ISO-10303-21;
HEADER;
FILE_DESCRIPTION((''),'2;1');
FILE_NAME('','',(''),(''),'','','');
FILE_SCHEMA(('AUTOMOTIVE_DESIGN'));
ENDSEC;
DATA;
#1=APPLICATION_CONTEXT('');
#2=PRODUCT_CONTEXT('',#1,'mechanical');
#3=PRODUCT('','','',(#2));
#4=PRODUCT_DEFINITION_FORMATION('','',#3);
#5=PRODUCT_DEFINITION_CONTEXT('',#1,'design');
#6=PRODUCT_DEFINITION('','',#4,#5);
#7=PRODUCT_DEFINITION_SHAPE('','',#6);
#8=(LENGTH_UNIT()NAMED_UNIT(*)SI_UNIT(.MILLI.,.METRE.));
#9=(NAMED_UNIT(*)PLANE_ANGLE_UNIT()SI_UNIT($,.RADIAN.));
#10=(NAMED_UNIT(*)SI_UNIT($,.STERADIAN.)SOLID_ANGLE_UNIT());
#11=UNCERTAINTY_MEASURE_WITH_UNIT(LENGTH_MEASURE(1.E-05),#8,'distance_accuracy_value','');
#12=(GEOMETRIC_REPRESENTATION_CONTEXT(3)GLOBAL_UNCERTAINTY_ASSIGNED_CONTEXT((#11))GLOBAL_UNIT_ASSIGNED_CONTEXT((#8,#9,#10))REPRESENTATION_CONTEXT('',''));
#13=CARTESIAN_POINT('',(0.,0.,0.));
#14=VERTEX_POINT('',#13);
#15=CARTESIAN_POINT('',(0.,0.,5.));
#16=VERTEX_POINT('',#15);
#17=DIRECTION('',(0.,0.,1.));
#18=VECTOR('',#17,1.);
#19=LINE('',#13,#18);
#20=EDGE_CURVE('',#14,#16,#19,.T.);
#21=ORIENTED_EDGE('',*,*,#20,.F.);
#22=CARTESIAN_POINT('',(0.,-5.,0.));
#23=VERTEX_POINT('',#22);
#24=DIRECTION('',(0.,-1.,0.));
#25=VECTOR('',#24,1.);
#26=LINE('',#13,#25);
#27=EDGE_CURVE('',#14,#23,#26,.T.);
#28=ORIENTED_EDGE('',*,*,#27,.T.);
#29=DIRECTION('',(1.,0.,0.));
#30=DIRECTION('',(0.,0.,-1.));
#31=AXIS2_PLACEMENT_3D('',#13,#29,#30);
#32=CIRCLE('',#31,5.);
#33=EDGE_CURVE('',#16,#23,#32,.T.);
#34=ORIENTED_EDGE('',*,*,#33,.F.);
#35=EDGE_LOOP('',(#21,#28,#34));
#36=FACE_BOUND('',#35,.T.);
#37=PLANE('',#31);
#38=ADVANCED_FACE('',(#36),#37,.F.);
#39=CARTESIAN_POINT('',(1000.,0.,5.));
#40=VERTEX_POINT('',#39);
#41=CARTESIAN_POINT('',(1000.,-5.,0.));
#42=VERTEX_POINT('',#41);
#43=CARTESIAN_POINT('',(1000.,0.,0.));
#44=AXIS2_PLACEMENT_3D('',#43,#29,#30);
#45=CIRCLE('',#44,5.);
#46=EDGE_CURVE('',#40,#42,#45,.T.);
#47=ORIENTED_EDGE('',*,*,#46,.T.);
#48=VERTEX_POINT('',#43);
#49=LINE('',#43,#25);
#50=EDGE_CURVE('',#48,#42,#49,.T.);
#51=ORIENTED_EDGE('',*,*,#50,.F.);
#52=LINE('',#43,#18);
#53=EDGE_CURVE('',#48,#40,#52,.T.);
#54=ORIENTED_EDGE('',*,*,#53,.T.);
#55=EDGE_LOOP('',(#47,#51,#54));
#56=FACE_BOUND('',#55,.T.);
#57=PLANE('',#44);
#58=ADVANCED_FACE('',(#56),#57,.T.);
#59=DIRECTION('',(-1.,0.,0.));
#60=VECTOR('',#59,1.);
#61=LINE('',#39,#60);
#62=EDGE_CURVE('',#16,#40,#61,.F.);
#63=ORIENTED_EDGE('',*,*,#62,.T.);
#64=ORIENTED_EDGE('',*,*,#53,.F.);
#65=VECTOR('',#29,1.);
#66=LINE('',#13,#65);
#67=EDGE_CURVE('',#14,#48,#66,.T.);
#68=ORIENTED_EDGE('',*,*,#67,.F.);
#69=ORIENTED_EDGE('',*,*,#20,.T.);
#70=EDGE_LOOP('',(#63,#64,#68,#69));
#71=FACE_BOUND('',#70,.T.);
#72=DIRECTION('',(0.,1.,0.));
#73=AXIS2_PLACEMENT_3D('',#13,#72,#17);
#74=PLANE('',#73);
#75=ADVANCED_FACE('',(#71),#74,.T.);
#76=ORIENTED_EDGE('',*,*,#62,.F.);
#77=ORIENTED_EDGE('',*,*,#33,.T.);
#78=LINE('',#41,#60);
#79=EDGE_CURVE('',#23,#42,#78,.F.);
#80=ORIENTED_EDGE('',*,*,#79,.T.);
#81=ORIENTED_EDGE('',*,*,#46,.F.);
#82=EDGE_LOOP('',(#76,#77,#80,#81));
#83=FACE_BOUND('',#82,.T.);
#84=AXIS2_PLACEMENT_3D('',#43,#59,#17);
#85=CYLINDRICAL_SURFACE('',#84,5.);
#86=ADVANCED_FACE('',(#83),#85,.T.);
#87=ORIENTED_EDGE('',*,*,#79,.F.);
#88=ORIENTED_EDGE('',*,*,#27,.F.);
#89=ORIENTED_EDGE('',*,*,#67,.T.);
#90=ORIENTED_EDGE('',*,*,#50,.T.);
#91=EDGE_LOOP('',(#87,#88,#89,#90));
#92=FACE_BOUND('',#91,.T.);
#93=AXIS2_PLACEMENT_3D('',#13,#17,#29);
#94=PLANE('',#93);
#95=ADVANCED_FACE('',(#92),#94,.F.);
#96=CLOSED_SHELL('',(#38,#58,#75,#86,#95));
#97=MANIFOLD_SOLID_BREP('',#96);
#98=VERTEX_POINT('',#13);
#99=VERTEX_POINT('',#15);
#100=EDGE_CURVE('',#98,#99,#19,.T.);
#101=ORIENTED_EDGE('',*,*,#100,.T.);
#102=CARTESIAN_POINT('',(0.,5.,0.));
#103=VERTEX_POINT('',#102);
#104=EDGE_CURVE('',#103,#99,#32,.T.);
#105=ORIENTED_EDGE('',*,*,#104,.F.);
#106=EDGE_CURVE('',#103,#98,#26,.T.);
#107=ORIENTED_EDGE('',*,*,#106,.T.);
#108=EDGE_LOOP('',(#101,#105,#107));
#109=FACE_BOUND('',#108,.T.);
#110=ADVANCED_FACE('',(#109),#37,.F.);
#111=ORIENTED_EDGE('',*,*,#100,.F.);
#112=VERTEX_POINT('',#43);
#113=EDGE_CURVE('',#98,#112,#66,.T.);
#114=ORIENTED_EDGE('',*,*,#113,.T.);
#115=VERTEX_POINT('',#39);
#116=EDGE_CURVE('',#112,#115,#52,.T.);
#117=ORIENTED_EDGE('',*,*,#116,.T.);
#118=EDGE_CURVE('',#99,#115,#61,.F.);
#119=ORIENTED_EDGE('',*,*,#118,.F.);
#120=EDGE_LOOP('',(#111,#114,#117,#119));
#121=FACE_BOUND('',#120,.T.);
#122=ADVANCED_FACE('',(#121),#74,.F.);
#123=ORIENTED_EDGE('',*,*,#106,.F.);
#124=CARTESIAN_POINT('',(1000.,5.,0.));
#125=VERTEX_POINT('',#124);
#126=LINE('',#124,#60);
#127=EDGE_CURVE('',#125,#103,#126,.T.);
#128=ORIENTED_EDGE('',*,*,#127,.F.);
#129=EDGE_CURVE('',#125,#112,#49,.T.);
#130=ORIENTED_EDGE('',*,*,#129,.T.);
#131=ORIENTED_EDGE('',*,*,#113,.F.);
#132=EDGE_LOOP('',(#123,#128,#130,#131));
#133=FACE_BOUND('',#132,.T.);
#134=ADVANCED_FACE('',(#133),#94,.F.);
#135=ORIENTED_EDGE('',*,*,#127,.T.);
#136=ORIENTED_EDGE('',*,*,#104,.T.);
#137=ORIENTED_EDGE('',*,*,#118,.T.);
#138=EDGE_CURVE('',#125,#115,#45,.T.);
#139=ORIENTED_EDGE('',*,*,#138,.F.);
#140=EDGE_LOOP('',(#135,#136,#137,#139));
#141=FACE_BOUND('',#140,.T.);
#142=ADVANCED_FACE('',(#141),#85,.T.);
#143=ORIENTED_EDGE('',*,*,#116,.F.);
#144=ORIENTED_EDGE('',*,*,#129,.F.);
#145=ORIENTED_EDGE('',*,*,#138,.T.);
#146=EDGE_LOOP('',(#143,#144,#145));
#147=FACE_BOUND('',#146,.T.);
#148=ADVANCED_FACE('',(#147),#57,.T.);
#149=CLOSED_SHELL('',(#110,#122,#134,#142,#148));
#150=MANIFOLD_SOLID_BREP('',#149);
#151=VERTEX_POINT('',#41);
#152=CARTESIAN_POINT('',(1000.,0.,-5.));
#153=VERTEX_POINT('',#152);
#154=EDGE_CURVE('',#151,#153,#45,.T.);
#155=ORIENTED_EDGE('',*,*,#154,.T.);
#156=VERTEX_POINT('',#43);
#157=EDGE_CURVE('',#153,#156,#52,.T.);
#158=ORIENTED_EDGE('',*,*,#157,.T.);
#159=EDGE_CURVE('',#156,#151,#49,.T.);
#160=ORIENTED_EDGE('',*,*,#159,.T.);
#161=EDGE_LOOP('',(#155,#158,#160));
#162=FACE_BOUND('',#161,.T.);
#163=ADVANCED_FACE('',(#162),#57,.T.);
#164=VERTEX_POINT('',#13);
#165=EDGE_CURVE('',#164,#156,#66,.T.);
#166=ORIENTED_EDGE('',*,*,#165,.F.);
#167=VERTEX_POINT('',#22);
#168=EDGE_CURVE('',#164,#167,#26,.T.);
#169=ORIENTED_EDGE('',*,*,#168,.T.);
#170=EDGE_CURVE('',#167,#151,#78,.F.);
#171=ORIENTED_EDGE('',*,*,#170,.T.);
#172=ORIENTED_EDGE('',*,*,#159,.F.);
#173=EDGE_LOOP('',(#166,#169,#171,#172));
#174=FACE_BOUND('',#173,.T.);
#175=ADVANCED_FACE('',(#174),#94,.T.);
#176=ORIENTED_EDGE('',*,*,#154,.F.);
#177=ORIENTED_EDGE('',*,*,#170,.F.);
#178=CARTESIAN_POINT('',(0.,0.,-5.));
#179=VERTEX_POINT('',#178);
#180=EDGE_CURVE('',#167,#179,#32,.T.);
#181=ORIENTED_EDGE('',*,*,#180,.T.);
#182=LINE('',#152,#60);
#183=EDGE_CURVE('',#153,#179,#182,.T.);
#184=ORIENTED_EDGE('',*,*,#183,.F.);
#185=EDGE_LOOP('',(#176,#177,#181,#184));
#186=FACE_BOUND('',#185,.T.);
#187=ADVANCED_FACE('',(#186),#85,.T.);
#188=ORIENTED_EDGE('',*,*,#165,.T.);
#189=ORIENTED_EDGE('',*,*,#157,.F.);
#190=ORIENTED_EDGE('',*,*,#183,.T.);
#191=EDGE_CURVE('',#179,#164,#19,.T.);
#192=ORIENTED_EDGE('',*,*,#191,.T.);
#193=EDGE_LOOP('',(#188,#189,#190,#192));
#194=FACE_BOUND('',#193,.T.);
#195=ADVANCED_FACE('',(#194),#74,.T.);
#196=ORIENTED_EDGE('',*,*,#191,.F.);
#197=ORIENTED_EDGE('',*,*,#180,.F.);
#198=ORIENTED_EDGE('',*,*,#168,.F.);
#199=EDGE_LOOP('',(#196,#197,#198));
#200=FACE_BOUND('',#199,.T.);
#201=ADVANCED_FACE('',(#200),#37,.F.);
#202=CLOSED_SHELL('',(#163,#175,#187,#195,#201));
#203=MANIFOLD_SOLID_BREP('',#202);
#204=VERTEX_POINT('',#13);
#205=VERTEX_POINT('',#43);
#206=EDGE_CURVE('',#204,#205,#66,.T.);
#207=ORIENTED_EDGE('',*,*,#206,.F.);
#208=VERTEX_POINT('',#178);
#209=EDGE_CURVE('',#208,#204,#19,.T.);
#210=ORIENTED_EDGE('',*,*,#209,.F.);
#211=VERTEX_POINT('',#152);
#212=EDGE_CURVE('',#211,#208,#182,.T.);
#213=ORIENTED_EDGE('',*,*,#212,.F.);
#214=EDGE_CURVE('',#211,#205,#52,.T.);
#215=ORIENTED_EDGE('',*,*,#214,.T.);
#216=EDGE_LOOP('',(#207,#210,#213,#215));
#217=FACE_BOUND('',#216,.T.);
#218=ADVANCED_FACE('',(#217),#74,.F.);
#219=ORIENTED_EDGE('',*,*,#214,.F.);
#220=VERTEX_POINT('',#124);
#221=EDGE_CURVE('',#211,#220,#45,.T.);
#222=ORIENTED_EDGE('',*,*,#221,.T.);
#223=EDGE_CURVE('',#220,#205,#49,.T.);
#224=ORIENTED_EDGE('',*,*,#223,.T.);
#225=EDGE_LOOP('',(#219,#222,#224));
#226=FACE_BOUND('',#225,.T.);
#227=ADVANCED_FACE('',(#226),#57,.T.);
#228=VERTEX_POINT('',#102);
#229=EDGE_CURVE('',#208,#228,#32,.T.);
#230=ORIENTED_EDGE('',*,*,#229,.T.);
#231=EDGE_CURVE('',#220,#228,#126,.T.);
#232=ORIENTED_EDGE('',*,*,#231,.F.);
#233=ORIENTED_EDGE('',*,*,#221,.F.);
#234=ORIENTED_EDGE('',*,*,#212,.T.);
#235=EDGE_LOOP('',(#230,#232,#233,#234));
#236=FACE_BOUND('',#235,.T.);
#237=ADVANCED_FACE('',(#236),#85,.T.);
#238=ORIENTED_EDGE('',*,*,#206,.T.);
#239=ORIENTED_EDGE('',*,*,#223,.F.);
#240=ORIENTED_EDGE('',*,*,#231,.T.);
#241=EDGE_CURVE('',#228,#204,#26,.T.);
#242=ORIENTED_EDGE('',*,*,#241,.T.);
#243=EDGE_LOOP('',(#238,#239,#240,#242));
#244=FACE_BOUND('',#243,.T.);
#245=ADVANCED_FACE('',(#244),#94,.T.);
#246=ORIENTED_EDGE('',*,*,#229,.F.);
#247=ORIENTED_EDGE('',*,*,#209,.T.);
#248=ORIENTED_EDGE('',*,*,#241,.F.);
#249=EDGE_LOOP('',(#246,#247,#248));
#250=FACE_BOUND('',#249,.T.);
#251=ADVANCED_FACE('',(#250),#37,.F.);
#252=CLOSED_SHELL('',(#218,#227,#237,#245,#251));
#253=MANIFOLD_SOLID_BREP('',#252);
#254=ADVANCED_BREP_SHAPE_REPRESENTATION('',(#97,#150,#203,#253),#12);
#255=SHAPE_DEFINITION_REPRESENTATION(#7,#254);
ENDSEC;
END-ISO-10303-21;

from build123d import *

# Parameters (mm, degrees)
SKETCH_1_R                 = 5
EXTRUDE_1_DEPTH            = 1000
SPLIT_START                = -5.0000001
SPLIT_BODIES_1_OUTLINE_W   = 1000
SPLIT_BODIES_1_OUTLINE_H   = 6
SPLIT_BODIES_1_DEPTH       = 10.0000001
SPLIT_BODIES_1_2_OUTLINE_W = 1000
SPLIT_BODIES_1_2_OUTLINE_H = 6
SPLIT_BODIES_1_2_DEPTH     = 5
SPLIT_BODIES_1_3_DEPTH     = 1000
SPLIT_BODIES_1_4_DEPTH     = 1000
SPLIT_BODIES_1_5_DEPTH     = 1000


# Read off the part's stored shape, not the designer's step: Разделить1
with BuildPart() as part:
    # Эскиз1 → Бобышка-Вытянуть1 (new body)
    with BuildSketch(Plane(origin=(0, 0, 0), x_dir=(0, 0, -1), z_dir=(1, 0, 0))):
        Circle(SKETCH_1_R)
    extrude(amount=EXTRUDE_1_DEPTH)

    # Split Bodies 1 outline → Split Bodies 1 (cut)
    with BuildSketch(Plane(origin=(0, 0, 0), x_dir=(1, 0, 0), z_dir=(0, 1, 0)).offset(SPLIT_START)):
        with Locations((500, -3)):
            Rectangle(SPLIT_BODIES_1_OUTLINE_W, SPLIT_BODIES_1_OUTLINE_H)
    extrude(amount=SPLIT_BODIES_1_DEPTH, mode=Mode.SUBTRACT)

    # Split Bodies 1 2 outline → Split Bodies 1 2 (cut)
    with BuildSketch(Plane(origin=(0, 0, 0), x_dir=(1, 0, 0), z_dir=(0, 1, 0))):
        with Locations((500, 3)):
            Rectangle(SPLIT_BODIES_1_2_OUTLINE_W, SPLIT_BODIES_1_2_OUTLINE_H)
    extrude(amount=SPLIT_BODIES_1_2_DEPTH, mode=Mode.SUBTRACT)


with BuildPart() as body_2:
    # Split Bodies 1 3 outline → Split Bodies 1 3 (new body)
    with BuildSketch(Plane.YZ):
        with BuildLine():
            Line((0, 5), (0, 0))
            Line((0, 0), (5, 0))
            ThreePointArc((5, 0), (3.535533906, 3.535533906), (0, 5))
        make_face()
    extrude(amount=SPLIT_BODIES_1_3_DEPTH)


with BuildPart() as body_3:
    # Split Bodies 1 4 outline → Split Bodies 1 4 (new body)
    with BuildSketch(Plane.YZ):
        with BuildLine():
            Line((-5, 0), (0, 0))
            Line((0, 0), (0, 5))
            ThreePointArc((0, 5), (-3.535533906, 3.535533906), (-5, 0))
        make_face()
    extrude(amount=SPLIT_BODIES_1_4_DEPTH)


with BuildPart() as body_4:
    # Split Bodies 1 5 outline → Split Bodies 1 5 (new body)
    with BuildSketch(Plane.YZ):
        with BuildLine():
            Line((0, 0), (0, -5))
            ThreePointArc((0, -5), (3.535533906, -3.535533906), (5, 0))
            Line((5, 0), (0, 0))
        make_face()
    extrude(amount=SPLIT_BODIES_1_5_DEPTH)


solid = Compound([part.part, body_2.part, body_3.part, body_4.part])
